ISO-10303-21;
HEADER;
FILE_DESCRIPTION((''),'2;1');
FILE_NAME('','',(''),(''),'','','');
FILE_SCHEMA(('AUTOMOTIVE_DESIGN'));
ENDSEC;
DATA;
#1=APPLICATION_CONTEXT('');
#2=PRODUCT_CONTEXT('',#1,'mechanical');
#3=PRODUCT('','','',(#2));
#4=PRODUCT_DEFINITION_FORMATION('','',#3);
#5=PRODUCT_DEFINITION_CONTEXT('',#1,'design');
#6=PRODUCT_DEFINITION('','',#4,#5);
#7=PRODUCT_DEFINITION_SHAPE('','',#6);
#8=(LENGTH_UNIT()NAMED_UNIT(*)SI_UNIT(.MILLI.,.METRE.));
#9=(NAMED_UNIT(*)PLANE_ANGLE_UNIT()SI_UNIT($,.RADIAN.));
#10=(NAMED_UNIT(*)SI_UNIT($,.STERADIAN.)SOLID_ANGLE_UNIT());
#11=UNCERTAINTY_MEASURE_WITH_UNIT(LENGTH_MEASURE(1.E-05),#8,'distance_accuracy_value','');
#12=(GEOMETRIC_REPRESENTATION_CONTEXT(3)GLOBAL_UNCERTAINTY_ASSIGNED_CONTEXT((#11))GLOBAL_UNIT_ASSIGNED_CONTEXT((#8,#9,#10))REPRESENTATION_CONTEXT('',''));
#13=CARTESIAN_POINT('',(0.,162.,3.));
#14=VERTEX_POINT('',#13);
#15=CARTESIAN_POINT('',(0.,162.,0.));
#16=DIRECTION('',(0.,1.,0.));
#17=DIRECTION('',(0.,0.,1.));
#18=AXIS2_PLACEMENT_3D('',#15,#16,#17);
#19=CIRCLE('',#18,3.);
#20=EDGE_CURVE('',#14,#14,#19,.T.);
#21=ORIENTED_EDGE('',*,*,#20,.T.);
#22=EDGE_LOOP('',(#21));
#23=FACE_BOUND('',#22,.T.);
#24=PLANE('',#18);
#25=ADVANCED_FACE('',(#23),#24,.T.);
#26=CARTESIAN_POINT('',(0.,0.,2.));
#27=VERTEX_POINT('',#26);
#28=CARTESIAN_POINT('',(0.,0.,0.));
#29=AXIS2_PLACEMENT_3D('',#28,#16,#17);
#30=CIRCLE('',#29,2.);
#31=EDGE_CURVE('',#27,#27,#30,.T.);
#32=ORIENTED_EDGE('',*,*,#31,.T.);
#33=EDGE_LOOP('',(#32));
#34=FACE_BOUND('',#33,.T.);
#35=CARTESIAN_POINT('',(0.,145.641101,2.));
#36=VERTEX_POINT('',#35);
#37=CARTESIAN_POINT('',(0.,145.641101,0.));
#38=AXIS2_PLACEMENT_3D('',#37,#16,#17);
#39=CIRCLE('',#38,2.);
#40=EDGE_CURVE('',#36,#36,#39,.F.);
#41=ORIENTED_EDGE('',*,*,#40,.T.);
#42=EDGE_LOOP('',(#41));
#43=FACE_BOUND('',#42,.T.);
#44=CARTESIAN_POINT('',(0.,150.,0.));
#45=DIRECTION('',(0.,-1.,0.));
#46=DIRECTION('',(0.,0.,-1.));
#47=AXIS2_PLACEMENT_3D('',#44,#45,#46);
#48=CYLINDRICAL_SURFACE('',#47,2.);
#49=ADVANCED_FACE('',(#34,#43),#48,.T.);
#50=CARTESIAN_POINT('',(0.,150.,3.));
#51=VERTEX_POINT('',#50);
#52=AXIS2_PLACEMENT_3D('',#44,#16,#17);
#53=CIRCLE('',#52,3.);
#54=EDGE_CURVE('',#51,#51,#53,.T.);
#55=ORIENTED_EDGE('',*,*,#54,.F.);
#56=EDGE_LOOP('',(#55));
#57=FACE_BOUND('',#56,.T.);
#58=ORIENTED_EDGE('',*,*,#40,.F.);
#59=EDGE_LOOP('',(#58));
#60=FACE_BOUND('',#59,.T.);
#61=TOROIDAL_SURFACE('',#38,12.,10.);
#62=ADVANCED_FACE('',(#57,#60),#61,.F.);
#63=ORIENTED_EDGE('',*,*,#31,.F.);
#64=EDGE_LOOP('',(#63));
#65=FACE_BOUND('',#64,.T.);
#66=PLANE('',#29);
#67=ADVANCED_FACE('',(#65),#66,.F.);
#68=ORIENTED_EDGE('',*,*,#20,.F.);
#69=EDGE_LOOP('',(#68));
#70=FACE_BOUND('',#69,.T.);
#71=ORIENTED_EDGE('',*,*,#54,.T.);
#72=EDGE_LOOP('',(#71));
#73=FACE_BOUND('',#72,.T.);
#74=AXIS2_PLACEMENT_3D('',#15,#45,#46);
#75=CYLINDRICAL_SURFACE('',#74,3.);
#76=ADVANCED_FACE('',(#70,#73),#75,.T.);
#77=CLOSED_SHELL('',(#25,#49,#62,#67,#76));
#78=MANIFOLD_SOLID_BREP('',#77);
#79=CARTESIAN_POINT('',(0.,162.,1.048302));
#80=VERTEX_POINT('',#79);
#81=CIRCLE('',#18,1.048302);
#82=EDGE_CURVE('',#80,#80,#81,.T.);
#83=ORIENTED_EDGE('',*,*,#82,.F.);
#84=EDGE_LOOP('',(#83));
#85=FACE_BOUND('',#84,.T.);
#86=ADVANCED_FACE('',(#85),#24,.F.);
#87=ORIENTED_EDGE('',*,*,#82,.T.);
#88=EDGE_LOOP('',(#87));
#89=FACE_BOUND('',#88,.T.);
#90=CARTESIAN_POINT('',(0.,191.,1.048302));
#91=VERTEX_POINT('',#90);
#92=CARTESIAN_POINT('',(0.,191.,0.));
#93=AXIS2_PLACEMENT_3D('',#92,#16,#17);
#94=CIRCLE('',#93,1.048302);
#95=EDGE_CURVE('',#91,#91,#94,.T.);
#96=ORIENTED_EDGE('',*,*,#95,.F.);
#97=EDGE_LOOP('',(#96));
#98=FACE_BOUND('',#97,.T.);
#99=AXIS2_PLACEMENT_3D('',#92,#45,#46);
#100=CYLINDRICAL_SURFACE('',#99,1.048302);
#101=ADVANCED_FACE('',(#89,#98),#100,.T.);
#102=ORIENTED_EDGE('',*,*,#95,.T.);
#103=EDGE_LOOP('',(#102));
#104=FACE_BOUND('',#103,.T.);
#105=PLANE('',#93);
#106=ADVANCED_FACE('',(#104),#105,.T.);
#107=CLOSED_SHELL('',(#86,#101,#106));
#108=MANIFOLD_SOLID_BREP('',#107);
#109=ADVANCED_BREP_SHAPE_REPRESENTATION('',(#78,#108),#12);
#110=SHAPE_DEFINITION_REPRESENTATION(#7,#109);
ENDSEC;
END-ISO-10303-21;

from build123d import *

# Parameters (mm, degrees)
SKETCH1_R           = 2
BOSS_EXTRUDE1_DEPTH = 150
SKETCH2_R           = 3
BOSS_EXTRUDE2_DEPTH = 12
FILLET1_R           = 10
SKETCH3_R           = 1.048302248
BOSS_EXTRUDE3_DEPTH = 29


with BuildPart() as part:
    # Sketch1 → Boss-Extrude1 (new body)
    with BuildSketch(Plane(origin=(0, 0, 0), x_dir=(1, 0, 0), z_dir=(0, 1, 0))):
        with Locations(Location((0, 0, 0), (0, 0, 270))):
            Circle(SKETCH1_R)
    extrude(amount=BOSS_EXTRUDE1_DEPTH)

    # Sketch2 → Boss-Extrude2 (add)
    with BuildSketch(Plane(origin=(0, 150, 0), x_dir=(1, 0, 0), z_dir=(0, 1, 0))):
        with Locations(Location((0, 0, 0), (0, 0, 270))):
            Circle(SKETCH2_R)
    extrude(amount=BOSS_EXTRUDE2_DEPTH)

    # Fillet1
    # the kernel refuses this fillet: 10 mm, written as the material it adds along each edge
    with BuildSketch(Plane(origin=(0, 150, 0), x_dir=(0, 0, 1), z_dir=(-1, 0, 0))) as fillet1_piece_1:
        with BuildLine():
            CenterArc((12, -4.358898944), FILLET1_R, 154.158067237, 25.841932763)
            Line((2, -4.358898944), (1.8, -4.358898944))
            Line((1.8, -4.358898944), (1.8, 0))
            Line((1.8, 0), (2, 0.2))
            ThreePointArc((2, 0.2), (2.5, 0.2), (2.82, 0.087177979))
            Line((2.82, 0.087177979), (3, 0))
        make_face()
    revolve(axis=Axis((0, 150, 0), (0, 1, 0)))


with BuildPart() as body_2:
    # Sketch3 → Boss-Extrude3 (new body)
    with BuildSketch(Plane(origin=(0, 162, 0), x_dir=(1, 0, 0), z_dir=(0, 1, 0))):
        with Locations(Location((0, 0, 0), (0, 0, 270))):
            Circle(SKETCH3_R)
    extrude(amount=BOSS_EXTRUDE3_DEPTH)


solid = Compound([part.part, body_2.part])
